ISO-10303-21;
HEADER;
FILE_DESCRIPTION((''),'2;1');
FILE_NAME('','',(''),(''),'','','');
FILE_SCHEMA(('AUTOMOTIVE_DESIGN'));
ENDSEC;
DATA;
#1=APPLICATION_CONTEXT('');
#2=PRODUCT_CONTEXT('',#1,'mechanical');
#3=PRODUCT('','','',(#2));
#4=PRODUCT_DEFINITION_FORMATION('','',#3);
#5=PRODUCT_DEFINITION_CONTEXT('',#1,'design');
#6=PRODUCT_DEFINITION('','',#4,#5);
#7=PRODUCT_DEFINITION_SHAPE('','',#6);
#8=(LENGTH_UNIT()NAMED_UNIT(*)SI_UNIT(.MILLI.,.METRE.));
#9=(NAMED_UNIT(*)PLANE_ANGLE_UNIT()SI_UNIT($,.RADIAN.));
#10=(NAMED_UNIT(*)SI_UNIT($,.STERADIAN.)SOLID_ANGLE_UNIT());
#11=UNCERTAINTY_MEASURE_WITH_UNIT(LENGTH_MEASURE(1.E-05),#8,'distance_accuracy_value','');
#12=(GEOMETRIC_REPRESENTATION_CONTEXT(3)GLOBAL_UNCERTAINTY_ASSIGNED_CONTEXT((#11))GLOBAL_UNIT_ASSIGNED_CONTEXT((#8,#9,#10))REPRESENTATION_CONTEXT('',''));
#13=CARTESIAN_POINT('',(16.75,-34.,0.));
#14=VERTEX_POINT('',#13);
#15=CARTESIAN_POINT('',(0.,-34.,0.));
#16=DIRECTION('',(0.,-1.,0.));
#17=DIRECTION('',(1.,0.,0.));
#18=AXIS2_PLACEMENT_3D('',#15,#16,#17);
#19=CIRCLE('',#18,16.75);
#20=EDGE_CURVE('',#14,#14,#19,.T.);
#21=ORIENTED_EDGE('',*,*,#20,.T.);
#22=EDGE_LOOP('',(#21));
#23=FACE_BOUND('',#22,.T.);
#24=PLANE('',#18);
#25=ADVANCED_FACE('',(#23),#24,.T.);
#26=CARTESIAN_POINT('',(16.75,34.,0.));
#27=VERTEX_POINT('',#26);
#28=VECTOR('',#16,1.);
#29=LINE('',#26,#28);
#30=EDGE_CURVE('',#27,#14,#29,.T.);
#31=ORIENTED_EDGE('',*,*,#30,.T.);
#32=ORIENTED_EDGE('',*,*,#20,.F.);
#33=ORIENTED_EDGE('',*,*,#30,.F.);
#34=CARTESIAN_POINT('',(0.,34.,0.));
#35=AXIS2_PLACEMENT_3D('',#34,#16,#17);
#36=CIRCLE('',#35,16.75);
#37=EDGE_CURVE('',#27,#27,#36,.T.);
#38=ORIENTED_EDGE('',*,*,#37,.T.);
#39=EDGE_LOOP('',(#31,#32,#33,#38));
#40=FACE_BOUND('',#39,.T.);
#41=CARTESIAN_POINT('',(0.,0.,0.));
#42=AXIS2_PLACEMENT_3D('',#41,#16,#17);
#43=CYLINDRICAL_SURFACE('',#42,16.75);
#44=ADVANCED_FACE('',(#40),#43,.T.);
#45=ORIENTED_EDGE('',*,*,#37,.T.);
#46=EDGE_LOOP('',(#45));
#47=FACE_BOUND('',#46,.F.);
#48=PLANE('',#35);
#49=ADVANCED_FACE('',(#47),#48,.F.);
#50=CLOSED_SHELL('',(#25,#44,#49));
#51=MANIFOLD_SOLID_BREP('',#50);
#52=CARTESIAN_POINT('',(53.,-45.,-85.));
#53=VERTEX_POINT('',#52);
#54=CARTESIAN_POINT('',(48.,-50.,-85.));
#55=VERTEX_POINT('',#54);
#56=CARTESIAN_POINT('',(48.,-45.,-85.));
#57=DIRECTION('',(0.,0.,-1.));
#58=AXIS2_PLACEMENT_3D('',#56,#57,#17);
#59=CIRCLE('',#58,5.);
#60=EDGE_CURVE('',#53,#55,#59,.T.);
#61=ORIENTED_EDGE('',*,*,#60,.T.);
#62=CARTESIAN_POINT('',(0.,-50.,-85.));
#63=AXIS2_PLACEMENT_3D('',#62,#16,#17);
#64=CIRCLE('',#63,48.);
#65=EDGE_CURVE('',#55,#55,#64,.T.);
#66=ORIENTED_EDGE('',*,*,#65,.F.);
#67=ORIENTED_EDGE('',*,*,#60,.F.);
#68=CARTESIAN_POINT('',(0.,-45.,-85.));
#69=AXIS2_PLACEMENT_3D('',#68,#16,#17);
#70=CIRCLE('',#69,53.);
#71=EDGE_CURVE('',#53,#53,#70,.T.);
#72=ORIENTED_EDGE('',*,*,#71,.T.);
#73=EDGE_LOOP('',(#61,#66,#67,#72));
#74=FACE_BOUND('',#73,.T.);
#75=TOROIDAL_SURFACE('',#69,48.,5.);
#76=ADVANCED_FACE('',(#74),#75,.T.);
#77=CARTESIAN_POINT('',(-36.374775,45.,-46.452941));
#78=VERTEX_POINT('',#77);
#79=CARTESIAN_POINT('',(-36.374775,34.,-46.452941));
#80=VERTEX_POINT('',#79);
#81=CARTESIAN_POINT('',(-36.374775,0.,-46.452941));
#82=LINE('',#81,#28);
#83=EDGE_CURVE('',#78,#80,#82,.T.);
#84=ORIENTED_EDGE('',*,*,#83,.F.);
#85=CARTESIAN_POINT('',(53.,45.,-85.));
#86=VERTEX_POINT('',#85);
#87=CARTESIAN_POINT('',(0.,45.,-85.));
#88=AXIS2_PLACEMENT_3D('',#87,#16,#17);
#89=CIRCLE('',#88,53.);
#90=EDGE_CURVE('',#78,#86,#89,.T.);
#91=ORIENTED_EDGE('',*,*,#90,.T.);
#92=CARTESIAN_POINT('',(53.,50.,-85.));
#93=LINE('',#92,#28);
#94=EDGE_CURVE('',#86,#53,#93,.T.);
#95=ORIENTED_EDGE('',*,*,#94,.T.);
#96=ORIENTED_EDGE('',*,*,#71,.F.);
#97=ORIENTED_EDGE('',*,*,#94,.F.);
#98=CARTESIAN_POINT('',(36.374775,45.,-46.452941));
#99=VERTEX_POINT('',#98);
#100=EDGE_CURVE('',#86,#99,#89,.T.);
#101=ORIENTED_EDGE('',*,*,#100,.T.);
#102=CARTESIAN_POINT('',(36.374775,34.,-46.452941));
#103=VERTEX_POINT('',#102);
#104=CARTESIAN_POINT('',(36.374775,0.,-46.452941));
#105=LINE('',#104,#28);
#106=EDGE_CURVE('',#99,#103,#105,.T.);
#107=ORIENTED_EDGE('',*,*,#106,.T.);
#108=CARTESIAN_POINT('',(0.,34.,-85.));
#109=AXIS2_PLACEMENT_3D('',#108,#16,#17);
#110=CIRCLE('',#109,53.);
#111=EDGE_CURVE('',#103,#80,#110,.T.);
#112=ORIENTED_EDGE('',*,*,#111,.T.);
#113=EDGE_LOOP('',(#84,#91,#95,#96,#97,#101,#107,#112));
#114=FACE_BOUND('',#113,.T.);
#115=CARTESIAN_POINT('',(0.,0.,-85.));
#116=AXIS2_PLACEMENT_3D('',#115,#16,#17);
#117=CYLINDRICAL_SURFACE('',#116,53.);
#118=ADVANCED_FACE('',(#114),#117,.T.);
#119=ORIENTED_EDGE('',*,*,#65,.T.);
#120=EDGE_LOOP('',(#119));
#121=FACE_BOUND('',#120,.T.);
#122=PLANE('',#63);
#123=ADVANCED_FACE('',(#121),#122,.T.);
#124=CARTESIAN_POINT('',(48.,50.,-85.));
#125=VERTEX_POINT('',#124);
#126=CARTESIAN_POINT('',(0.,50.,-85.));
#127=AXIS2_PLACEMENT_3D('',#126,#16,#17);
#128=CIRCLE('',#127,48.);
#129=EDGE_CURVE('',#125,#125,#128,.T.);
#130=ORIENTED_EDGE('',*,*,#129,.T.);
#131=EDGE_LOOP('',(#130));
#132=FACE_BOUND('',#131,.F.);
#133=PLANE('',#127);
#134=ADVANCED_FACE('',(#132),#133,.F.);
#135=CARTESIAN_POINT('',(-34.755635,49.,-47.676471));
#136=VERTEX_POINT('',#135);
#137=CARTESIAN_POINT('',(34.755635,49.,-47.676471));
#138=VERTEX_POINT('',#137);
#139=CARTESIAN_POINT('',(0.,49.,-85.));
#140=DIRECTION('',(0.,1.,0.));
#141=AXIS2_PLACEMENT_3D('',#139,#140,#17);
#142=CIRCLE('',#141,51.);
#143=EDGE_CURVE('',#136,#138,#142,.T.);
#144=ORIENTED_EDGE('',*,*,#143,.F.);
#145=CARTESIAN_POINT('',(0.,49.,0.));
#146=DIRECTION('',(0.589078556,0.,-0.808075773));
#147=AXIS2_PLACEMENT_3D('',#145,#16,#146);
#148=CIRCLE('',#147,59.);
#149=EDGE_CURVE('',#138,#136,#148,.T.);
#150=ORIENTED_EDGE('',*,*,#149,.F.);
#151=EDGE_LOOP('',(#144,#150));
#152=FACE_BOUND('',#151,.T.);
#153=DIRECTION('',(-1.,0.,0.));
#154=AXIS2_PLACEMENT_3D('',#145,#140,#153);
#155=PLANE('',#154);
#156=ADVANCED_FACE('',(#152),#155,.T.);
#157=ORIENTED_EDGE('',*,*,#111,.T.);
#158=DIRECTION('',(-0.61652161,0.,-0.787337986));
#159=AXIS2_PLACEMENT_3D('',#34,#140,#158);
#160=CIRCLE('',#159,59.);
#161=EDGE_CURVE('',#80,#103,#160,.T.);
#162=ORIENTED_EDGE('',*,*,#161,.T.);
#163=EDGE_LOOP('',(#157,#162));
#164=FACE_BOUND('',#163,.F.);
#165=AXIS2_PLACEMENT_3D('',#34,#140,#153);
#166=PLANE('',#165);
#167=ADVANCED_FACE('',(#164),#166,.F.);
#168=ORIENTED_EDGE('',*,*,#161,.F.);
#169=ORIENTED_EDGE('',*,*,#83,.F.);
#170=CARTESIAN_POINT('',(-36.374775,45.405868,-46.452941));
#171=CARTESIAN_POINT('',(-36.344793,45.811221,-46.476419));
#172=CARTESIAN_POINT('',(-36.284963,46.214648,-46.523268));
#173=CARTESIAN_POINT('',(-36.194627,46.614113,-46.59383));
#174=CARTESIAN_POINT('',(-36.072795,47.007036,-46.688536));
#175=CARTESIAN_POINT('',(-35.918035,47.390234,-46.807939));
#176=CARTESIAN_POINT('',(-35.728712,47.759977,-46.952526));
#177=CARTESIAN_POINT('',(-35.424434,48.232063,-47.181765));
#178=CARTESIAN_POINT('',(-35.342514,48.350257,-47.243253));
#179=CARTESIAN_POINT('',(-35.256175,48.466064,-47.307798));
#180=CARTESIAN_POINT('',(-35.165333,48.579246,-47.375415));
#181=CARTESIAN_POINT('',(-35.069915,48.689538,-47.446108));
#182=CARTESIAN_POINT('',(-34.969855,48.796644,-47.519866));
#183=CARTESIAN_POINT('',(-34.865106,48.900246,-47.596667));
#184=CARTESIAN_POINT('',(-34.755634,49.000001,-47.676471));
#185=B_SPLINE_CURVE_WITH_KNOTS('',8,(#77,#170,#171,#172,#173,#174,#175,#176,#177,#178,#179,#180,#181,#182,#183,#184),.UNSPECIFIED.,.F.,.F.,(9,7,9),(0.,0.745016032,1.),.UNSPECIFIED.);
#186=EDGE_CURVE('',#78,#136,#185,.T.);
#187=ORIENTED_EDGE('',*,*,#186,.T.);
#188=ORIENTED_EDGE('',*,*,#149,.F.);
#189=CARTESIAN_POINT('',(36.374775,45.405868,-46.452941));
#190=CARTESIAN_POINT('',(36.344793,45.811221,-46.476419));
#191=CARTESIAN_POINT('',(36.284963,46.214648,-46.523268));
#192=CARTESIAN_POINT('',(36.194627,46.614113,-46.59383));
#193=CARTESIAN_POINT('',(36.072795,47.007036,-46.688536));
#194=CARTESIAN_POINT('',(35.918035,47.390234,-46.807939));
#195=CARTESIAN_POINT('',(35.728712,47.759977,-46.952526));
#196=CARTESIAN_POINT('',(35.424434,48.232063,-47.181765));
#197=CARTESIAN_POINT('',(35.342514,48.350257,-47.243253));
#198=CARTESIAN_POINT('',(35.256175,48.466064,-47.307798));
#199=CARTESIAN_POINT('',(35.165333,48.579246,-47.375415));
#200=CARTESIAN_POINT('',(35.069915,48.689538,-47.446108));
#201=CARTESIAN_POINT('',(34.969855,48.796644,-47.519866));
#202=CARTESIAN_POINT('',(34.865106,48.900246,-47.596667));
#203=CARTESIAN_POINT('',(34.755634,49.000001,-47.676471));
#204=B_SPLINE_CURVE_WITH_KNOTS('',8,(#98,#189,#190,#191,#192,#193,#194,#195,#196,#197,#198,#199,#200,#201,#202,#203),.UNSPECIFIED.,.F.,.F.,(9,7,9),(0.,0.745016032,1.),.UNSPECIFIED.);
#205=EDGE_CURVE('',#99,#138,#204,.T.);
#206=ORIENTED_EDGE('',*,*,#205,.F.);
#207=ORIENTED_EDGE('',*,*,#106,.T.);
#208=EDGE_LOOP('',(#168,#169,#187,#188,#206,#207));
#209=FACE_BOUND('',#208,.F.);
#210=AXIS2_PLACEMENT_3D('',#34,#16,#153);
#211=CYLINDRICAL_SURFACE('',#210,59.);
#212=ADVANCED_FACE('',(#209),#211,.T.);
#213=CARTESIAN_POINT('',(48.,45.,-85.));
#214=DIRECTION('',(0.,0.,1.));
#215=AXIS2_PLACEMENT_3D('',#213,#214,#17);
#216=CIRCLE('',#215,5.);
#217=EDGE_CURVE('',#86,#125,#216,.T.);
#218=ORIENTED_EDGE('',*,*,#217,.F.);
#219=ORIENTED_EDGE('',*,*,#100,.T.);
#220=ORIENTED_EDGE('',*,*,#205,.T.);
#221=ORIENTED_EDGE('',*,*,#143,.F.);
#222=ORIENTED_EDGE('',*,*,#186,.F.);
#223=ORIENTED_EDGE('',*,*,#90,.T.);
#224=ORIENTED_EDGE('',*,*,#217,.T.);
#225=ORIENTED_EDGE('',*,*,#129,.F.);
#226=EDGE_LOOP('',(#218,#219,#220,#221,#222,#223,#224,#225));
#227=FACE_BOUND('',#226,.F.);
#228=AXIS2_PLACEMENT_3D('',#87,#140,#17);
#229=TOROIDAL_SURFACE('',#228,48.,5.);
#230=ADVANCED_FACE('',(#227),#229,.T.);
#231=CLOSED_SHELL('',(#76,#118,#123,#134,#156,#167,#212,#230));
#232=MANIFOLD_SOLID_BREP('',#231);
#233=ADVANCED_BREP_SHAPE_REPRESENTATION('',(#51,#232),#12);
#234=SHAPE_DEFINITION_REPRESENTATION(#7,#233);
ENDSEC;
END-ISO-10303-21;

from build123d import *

# Parameters (mm, degrees)
F1_R     = 53
F2_DEPTH = 50
F3_R     = 5
F4_R     = 16.75
F5_DEPTH = 34
F6_R     = 59
F7_DEPTH = 15


with BuildPart() as f2:
    # F1 (on Front) → F2 (new body, symmetric)
    with BuildSketch(Plane.XZ):
        with Locations((0, -85)):
            Circle(F1_R)
    extrude(amount=F2_DEPTH, both=True)

    # F3
    f3_edges = [f2.edges().sort_by_distance(p)[0] for p in [
        (-53, -50, -85),
        (-53, 50, -85),
    ]]
    fillet(f3_edges, radius=F3_R)

    # F6 (on face) → F7 (join)
    with BuildSketch(Plane(origin=(0, 34, 0), x_dir=(-1, 0, 0), z_dir=(0, 1, 0))):
        Circle(F6_R)
    extrude(amount=F7_DEPTH)


with BuildPart() as f5:
    # F4 (on Front) → F5 (new body, symmetric)
    with BuildSketch(Plane.XZ):
        Circle(F4_R)
    extrude(amount=F5_DEPTH, both=True)


solid = Compound([f2.part, f5.part])
